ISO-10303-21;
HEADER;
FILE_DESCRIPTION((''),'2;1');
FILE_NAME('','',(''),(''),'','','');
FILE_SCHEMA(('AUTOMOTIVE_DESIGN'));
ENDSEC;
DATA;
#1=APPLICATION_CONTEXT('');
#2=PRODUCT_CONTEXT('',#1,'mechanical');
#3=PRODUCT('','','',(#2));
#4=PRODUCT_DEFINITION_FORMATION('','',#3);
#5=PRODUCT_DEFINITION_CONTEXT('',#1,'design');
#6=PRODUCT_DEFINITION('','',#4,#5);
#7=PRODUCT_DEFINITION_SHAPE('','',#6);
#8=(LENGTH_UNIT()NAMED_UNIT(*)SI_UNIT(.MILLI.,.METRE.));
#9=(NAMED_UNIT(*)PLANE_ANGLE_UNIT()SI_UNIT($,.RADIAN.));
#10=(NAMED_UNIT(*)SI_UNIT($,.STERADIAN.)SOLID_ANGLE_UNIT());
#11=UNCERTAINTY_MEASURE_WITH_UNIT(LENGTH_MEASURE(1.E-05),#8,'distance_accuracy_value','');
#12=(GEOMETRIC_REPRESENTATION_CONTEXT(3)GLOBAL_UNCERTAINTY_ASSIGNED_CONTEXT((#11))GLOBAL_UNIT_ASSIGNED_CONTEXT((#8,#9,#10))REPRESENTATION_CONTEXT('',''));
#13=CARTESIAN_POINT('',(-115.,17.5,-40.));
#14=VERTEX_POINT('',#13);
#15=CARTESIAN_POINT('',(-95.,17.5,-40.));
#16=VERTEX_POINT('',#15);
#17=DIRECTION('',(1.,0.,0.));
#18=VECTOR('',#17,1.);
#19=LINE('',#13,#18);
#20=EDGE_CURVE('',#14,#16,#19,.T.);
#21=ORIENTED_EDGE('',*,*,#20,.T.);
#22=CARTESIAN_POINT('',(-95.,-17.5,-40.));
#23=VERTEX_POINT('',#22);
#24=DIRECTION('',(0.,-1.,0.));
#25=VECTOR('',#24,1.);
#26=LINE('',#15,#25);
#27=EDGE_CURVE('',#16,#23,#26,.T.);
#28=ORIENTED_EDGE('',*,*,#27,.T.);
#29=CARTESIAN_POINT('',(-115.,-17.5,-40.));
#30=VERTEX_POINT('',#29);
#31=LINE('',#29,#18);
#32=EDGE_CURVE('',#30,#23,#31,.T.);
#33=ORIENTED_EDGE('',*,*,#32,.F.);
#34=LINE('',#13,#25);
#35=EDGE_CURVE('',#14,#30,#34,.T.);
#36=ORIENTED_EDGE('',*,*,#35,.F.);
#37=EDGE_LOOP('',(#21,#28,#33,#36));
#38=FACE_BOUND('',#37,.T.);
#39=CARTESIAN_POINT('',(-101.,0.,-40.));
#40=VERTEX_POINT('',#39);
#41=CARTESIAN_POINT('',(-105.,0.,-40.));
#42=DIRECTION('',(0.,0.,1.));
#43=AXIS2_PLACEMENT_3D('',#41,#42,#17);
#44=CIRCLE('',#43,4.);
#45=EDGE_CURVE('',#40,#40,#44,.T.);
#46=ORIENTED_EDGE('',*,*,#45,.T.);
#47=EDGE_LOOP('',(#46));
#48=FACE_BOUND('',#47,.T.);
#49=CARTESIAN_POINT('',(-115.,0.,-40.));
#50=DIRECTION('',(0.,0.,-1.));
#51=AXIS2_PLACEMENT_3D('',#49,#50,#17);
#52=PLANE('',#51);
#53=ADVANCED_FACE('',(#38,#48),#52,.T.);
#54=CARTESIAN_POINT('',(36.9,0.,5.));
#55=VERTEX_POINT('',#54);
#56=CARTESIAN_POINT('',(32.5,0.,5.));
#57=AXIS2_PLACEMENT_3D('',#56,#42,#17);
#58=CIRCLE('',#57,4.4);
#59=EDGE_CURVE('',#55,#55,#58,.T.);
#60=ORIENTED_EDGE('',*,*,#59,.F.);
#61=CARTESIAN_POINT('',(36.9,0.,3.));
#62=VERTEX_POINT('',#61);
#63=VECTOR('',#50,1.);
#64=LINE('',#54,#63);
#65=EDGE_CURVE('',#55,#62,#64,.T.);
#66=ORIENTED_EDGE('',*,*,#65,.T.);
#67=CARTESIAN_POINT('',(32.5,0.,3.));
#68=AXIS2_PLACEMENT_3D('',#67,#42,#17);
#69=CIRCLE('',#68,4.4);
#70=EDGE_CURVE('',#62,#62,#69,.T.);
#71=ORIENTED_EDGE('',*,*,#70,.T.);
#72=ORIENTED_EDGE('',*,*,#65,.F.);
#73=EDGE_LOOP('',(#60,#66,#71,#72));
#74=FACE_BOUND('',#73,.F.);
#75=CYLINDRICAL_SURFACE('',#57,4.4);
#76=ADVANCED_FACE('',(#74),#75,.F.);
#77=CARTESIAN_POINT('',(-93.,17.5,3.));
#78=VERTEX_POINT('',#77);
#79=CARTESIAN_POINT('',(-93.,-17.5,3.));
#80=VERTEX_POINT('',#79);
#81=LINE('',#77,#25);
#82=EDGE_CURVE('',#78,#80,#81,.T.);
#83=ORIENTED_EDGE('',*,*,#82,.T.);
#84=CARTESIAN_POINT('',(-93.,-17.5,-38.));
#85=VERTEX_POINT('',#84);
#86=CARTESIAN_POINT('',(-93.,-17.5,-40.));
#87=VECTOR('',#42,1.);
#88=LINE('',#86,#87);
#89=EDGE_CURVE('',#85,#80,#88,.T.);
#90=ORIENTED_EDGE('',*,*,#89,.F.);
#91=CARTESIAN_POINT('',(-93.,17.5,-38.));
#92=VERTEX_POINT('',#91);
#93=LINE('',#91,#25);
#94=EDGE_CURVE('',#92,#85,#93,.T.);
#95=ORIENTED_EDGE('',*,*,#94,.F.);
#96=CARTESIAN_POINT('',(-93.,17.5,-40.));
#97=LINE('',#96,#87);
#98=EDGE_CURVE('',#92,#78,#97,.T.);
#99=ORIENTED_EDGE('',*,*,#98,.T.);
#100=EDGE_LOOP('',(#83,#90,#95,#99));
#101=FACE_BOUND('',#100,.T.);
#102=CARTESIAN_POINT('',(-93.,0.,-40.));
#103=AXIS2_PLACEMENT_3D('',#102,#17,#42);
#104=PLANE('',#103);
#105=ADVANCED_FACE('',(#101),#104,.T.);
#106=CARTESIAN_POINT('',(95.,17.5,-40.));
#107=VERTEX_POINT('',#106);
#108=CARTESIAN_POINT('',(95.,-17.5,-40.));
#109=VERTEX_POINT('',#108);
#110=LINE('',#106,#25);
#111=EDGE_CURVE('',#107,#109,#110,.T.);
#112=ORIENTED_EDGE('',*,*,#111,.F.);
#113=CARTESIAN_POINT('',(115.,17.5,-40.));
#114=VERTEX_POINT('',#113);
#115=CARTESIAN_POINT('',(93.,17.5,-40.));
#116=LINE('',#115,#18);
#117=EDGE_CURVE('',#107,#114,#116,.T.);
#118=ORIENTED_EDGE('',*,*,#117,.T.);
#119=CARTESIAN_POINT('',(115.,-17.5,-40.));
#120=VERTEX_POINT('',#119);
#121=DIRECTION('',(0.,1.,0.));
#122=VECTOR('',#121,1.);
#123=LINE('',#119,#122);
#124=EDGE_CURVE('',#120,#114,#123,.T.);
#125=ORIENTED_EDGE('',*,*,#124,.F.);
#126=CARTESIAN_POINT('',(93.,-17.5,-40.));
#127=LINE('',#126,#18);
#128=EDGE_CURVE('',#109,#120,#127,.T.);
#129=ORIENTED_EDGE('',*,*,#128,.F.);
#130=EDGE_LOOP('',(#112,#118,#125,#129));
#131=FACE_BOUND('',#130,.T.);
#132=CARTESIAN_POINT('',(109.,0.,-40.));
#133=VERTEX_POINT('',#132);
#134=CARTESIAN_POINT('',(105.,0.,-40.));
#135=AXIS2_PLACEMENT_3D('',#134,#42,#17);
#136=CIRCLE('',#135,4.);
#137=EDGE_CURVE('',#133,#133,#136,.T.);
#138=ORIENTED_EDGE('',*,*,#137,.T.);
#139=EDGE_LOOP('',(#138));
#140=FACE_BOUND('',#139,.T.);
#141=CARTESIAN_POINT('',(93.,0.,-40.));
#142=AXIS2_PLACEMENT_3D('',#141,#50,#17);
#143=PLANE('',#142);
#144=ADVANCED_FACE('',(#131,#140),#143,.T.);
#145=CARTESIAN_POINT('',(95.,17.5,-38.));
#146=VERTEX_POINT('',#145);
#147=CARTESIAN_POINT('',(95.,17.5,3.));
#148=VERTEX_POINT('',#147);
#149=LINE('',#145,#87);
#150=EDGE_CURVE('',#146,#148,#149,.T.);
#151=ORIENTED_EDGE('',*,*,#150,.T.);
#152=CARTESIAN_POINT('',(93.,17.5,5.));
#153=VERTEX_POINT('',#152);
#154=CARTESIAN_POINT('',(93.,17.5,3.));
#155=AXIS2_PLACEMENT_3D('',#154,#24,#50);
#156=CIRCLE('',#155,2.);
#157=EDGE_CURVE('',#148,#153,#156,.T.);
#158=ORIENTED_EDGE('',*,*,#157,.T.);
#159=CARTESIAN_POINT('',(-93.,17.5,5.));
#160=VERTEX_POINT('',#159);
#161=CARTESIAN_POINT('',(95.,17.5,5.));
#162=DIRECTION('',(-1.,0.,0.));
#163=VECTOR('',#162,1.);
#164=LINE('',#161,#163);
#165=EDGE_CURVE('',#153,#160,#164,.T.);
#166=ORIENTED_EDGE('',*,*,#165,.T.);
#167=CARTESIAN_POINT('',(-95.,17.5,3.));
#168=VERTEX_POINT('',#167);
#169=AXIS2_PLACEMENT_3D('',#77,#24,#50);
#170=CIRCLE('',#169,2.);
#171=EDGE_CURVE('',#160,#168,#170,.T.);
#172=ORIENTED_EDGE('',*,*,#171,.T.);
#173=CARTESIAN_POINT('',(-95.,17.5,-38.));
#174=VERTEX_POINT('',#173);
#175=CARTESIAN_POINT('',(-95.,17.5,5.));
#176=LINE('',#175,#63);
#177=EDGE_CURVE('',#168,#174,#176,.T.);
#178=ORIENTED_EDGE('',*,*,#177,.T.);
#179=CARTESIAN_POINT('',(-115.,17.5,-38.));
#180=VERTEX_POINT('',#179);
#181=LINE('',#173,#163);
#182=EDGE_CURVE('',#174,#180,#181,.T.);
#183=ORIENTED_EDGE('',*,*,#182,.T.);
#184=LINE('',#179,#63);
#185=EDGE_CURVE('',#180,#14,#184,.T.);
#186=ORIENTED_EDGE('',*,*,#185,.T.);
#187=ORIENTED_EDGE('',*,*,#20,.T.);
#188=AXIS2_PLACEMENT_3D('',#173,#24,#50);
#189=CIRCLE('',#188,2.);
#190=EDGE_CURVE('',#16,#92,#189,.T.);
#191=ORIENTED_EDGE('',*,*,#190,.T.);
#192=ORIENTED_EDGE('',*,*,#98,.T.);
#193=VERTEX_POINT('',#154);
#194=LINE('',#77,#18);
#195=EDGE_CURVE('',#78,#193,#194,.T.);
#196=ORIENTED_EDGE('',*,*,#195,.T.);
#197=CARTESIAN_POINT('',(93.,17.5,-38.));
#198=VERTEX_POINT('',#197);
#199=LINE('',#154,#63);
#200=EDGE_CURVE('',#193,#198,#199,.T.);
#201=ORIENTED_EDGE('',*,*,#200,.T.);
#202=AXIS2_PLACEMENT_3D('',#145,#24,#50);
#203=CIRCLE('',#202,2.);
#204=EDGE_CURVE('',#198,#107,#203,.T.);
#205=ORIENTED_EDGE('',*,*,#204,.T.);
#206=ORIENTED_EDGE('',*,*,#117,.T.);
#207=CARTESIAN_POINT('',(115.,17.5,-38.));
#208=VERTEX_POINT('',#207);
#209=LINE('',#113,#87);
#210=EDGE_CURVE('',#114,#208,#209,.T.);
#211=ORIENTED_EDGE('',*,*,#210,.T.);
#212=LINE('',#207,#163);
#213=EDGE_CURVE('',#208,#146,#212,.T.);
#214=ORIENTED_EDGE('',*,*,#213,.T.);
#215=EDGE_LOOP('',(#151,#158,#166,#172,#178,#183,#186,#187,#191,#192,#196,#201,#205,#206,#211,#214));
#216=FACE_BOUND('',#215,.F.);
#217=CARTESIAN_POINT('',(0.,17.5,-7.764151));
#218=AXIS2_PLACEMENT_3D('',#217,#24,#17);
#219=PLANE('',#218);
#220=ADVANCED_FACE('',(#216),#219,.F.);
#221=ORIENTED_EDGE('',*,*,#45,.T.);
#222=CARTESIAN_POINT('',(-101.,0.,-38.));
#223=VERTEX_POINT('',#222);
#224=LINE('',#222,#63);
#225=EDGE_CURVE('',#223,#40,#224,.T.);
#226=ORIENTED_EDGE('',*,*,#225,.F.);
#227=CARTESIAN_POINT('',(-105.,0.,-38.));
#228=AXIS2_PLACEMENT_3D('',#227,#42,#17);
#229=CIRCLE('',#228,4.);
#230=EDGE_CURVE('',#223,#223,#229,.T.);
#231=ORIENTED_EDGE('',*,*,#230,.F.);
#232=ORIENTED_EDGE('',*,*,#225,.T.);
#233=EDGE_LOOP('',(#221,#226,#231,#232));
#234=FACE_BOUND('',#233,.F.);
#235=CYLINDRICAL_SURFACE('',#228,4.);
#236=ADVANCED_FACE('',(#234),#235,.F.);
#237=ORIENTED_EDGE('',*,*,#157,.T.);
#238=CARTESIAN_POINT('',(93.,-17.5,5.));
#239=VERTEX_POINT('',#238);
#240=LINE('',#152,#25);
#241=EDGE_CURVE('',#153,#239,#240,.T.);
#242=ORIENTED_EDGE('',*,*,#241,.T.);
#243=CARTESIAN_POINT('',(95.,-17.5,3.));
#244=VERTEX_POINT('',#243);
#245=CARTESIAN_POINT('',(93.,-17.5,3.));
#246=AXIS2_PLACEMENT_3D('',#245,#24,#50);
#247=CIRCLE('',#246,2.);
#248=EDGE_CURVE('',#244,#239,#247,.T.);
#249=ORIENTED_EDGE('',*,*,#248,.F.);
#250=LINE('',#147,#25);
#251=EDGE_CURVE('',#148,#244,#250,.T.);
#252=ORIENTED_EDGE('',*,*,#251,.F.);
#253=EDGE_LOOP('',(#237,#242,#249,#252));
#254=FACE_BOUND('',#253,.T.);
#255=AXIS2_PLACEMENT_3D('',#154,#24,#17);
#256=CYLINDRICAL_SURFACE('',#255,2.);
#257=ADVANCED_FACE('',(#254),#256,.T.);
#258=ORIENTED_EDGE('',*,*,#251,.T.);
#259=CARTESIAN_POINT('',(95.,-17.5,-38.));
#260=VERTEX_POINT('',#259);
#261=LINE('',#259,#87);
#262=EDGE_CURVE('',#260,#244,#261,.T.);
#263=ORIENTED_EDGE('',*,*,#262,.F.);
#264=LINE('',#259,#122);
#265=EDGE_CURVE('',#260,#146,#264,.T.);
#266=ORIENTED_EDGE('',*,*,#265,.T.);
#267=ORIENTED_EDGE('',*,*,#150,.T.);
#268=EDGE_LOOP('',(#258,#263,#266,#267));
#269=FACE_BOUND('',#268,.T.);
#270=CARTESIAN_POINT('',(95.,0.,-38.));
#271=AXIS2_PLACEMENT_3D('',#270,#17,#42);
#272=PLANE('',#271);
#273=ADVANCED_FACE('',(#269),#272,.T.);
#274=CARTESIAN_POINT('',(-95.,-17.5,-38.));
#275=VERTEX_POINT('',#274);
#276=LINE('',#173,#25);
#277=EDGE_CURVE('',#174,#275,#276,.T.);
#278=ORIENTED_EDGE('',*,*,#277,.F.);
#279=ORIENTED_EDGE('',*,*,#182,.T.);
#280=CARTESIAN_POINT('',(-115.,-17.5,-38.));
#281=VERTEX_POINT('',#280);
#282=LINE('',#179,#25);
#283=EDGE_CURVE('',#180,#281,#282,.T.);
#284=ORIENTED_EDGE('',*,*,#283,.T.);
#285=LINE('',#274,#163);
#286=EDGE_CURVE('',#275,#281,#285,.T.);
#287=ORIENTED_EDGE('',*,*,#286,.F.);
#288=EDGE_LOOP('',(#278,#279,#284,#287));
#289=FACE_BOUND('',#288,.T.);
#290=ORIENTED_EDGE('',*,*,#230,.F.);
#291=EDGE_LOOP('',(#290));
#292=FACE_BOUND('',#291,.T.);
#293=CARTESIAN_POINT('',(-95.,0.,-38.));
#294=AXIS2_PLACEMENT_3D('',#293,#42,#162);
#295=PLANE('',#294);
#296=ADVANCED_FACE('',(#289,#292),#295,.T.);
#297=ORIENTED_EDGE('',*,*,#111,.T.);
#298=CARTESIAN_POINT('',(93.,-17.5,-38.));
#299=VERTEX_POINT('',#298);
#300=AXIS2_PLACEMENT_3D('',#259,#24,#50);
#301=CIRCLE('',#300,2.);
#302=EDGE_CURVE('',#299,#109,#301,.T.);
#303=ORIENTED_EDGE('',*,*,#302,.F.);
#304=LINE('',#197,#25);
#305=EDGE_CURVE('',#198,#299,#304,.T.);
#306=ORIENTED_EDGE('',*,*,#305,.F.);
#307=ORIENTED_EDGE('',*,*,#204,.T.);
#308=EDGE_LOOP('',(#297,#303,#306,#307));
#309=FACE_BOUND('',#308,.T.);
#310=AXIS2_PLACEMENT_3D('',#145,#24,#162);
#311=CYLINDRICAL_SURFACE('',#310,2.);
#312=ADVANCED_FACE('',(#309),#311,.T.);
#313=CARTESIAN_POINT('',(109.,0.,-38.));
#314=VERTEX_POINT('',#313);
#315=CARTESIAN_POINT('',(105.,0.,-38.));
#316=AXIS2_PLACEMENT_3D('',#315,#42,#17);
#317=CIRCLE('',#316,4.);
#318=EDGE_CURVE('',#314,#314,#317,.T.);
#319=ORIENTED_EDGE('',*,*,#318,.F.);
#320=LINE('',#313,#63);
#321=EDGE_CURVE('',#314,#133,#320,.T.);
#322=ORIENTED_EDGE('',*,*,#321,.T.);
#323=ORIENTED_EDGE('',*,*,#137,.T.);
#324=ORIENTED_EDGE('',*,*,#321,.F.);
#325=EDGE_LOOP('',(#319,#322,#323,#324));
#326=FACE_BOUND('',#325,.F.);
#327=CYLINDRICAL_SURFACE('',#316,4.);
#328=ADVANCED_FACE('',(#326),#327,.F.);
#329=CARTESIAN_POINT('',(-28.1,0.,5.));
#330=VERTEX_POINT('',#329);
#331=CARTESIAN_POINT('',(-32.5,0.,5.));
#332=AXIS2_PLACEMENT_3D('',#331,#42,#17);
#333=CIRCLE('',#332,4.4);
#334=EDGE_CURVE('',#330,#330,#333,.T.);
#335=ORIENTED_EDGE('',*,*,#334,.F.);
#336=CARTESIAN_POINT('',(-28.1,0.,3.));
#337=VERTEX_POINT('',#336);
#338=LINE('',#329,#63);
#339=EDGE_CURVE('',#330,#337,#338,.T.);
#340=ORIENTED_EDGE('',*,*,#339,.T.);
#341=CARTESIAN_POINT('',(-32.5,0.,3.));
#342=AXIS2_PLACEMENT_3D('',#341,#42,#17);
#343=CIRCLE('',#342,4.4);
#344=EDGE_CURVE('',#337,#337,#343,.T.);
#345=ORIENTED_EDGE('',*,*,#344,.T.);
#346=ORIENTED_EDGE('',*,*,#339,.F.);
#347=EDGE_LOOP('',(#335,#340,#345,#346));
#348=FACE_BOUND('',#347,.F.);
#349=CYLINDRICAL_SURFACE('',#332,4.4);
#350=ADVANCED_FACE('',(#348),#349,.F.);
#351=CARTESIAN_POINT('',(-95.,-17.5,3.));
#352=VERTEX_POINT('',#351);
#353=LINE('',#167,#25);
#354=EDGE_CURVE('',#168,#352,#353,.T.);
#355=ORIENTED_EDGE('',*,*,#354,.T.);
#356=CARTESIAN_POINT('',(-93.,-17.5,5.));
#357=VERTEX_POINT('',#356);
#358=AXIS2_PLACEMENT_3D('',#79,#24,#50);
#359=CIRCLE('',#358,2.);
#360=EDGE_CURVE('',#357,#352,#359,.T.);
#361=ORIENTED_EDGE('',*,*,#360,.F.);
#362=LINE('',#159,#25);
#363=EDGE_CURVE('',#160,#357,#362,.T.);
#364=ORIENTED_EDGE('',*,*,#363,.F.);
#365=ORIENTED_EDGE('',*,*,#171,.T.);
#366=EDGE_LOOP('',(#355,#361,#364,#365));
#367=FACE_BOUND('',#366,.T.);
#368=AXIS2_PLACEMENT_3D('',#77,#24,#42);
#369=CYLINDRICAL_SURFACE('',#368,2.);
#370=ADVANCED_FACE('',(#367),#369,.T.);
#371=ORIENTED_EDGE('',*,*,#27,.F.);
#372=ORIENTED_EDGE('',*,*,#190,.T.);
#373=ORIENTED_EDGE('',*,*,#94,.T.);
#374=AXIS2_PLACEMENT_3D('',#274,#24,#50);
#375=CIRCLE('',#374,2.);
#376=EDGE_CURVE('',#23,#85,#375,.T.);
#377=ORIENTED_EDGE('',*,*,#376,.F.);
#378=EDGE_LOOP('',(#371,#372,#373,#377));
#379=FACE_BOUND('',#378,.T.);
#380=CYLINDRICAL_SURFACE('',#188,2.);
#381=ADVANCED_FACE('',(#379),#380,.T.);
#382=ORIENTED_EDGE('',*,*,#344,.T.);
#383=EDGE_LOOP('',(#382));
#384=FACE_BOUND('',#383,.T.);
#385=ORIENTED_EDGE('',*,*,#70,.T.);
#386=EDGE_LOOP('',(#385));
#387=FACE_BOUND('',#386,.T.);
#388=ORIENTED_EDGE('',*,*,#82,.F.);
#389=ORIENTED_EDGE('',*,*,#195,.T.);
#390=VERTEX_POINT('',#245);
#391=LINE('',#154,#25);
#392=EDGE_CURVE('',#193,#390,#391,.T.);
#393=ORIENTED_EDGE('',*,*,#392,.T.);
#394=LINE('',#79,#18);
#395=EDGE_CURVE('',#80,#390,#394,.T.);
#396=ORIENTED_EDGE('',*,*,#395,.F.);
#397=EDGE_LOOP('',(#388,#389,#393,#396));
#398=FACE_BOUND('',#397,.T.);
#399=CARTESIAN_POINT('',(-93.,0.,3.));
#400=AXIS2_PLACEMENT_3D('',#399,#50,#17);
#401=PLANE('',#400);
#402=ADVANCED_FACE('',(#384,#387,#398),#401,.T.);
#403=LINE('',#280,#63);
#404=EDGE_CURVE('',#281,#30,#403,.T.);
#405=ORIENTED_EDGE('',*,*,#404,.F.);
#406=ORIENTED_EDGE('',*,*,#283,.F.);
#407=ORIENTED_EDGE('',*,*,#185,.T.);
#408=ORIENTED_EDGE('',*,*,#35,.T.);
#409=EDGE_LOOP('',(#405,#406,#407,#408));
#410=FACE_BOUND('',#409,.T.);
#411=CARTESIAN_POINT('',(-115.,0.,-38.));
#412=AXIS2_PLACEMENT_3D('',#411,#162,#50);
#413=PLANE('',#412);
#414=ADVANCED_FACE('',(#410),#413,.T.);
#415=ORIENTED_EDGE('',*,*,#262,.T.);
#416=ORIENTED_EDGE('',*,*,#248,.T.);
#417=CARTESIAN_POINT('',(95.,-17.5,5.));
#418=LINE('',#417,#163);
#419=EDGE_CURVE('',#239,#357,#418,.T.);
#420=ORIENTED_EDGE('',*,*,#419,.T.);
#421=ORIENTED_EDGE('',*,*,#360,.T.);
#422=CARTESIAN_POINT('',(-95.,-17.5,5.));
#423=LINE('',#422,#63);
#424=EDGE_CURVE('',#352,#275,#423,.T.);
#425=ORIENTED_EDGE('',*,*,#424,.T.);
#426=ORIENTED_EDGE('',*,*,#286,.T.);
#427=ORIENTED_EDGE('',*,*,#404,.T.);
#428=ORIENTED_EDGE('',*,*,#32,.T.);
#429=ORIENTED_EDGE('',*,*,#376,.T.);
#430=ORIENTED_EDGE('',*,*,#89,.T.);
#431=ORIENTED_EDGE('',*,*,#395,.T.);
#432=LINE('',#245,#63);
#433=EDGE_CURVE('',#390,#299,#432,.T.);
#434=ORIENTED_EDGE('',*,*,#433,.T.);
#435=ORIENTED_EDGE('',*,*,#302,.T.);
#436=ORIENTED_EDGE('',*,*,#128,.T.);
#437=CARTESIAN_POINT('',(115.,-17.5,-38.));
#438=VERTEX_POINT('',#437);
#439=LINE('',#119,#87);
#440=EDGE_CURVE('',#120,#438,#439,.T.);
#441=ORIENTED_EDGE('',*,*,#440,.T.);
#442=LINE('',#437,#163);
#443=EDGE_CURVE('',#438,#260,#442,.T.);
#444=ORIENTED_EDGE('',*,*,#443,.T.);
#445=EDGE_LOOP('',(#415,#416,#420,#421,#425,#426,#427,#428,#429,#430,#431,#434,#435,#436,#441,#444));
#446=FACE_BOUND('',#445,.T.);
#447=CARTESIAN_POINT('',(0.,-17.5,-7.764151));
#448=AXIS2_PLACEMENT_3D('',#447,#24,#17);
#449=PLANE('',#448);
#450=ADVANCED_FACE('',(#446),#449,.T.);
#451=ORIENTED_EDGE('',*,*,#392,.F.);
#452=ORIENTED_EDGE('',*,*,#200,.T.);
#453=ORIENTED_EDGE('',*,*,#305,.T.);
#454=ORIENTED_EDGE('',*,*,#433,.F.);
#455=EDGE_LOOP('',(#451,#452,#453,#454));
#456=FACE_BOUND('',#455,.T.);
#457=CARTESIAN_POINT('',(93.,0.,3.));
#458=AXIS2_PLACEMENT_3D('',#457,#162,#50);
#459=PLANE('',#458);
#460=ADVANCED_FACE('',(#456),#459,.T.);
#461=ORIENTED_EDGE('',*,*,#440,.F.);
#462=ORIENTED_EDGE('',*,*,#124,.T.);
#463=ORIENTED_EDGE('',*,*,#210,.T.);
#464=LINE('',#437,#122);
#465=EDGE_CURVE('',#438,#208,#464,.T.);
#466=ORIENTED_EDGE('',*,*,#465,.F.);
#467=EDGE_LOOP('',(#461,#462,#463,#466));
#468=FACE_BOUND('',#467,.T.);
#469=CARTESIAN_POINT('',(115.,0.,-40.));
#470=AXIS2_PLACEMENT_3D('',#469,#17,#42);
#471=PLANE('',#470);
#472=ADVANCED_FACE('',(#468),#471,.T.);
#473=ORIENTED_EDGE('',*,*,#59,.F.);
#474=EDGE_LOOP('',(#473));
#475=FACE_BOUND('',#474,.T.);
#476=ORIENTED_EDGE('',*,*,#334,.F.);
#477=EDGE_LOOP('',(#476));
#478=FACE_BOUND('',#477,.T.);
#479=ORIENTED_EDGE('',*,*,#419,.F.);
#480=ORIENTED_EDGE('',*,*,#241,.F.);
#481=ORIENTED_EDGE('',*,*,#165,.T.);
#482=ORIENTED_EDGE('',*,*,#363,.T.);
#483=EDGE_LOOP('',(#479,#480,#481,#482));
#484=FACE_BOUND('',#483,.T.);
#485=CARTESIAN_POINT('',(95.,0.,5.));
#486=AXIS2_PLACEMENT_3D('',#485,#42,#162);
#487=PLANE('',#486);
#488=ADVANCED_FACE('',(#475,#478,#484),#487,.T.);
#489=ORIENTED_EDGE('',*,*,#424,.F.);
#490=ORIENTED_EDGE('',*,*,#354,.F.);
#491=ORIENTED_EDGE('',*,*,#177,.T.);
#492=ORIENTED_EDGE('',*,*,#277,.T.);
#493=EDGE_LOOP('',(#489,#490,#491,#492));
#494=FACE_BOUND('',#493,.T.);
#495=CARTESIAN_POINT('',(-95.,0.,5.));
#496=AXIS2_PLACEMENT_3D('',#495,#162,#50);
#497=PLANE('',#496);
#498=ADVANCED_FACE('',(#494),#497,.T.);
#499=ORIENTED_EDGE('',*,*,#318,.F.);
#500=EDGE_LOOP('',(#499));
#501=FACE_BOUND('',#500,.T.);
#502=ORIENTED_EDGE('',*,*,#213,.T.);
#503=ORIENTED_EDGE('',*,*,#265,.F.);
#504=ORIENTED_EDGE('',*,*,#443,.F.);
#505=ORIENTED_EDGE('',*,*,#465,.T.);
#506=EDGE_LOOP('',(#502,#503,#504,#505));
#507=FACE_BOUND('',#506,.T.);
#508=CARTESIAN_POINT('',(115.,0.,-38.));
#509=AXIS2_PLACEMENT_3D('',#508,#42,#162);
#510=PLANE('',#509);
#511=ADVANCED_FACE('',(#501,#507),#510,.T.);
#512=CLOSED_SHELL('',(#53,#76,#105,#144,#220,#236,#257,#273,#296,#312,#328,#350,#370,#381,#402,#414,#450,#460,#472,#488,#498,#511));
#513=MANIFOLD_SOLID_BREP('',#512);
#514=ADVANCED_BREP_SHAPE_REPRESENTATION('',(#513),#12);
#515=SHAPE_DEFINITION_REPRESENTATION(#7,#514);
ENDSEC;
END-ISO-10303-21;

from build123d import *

# Parameters (mm, degrees)
F1_DEPTH = 17.5
F2_R     = 4
F3_DEPTH = 25
F4_R     = 4.4
F5_DEPTH = 25
F6_R     = 2


# Not quite as in the source:
# - a feature names something its author has since deleted; it is built from what else it names


with BuildPart() as f1:
    # F0 (on Front) → F1 (new body, symmetric)
    with BuildSketch(Plane.XZ):
        Polygon((95, -38), (95, 5), (-95, 5), (-95, -38), (-115, -38), (-115, -40), (-93, -40), (-93, 3), (93, 3), (93, -40), (115, -40), (115, -38), align=None)
    extrude(amount=F1_DEPTH, both=True)

    # F2 (on face) → F3 (cut)
    with BuildSketch(Plane.XY.offset(-38)):
        with Locations((-105, 0)):
            Circle(F2_R)
        with Locations((105, 0)):
            Circle(F2_R)
    extrude(amount=-F3_DEPTH, mode=Mode.SUBTRACT)

    # F4 (on face) → F5 (cut)
    with BuildSketch(Plane.XY.offset(5)):
        with Locations((-32.5, 0)):
            Circle(F4_R)
        with Locations((32.5, 0)):
            Circle(F4_R)
    extrude(amount=-F5_DEPTH, mode=Mode.SUBTRACT)

    # F6
    f6_edges = [f1.edges().sort_by_distance(p)[0] for p in [
        (95, 0, 5),
        (-95, 0, 5),
        (-93, 0, -40),
        (93, 0, -40),
    ]]
    fillet(f6_edges, radius=F6_R)


solid = f1.part
